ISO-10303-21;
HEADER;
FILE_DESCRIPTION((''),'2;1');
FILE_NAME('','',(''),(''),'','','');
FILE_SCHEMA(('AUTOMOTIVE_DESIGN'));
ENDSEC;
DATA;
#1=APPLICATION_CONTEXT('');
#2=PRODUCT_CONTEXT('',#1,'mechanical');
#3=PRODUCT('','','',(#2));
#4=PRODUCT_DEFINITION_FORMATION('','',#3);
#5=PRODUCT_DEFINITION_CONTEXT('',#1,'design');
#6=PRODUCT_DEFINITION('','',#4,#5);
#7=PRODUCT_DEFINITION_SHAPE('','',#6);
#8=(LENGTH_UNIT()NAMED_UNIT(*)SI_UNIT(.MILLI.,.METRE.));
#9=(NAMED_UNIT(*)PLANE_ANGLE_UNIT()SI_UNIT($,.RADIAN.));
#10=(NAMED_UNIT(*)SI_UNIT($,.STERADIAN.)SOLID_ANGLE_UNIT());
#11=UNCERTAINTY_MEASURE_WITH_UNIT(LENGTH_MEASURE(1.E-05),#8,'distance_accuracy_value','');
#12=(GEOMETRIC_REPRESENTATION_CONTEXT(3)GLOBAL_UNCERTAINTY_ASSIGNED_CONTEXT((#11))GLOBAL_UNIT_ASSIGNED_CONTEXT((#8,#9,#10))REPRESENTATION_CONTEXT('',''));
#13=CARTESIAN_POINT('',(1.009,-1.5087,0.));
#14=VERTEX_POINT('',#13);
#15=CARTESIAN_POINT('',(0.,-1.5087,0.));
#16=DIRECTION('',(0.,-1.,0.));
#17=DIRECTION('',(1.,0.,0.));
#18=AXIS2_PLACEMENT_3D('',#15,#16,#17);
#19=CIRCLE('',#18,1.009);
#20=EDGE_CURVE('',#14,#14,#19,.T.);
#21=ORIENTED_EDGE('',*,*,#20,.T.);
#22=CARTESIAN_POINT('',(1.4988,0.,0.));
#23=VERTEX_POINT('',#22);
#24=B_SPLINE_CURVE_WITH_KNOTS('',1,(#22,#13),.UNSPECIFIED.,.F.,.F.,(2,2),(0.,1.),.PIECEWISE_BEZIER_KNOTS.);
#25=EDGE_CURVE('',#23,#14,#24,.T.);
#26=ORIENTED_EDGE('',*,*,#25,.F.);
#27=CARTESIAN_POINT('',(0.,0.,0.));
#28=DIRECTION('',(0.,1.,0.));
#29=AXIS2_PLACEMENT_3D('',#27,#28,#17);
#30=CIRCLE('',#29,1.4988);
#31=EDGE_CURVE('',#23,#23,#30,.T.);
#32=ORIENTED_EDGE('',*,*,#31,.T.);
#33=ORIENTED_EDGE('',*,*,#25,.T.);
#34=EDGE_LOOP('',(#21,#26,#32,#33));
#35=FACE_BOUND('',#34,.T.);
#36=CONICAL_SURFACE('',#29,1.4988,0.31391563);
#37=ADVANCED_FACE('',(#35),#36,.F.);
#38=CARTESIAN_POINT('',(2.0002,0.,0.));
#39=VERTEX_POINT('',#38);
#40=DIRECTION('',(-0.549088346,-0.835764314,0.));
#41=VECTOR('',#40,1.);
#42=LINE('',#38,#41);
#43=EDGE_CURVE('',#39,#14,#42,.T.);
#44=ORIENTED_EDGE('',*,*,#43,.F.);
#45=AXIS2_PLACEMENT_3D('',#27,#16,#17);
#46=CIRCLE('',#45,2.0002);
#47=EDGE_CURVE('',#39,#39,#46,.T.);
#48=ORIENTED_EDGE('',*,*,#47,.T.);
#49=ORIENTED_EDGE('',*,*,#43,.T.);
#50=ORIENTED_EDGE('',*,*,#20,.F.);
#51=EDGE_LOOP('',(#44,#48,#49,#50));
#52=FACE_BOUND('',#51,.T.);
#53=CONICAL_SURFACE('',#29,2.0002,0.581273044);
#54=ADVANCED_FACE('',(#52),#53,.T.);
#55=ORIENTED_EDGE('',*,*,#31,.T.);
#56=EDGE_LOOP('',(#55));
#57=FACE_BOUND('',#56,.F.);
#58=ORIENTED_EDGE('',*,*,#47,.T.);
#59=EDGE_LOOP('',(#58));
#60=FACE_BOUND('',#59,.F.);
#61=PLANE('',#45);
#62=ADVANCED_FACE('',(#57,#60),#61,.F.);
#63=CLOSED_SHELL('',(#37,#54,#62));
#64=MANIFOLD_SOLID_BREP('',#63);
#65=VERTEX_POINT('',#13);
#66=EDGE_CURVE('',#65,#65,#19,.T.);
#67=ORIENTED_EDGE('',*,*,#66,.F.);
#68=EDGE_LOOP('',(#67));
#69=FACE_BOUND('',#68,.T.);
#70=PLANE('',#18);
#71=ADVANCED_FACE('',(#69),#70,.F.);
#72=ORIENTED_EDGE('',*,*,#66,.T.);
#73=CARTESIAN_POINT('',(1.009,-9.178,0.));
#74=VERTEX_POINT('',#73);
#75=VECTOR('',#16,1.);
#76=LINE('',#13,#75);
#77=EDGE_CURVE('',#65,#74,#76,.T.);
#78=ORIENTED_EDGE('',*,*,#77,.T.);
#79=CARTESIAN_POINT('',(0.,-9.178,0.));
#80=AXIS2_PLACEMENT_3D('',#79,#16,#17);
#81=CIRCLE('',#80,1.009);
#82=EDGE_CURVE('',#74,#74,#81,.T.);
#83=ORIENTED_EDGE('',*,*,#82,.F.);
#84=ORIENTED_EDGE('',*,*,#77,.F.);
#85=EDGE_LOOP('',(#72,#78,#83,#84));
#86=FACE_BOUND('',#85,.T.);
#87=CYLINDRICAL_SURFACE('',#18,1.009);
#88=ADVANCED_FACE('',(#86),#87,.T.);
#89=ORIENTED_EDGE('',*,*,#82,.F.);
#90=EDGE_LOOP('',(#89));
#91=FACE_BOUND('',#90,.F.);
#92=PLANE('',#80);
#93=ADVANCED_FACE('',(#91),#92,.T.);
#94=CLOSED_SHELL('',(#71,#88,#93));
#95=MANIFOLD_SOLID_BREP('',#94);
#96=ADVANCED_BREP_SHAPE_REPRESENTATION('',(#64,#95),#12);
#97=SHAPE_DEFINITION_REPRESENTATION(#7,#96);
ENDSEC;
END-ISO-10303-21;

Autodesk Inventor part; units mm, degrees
ref_plane "YZ Plane" through (0, 0, 0) normal (1, 0, 0) x (0, 1, 0)
ref_plane "XZ Plane" through (0, 0, 0) normal (0, 1, 0) x (-1, 0, 0)
ref_plane "XY Plane" through (0, 0, 0) normal (0, 0, 1) x (1, 0, 0)
sketch "Sketch1" plane through (0, 0, 0) normal (0, 0, 1) x (1, 0, 0)
  line L0 (2.0002, 0) -> (1.009, -1.5087)
  line L1 (1.009, -1.5087) -> (1.009, -9.178)
  line L2 (2.0002, 0) -> (0, 0)
  line L3 (0, 0) -> (0, -9.178)
  line L4 (0, -9.178) -> (1.009, -9.178)
revolve "Revolution1" add sketch "Sketch1" angle 360 about axis through (0, 0, 0) along (0, -1, 0)
sketch "Sketch2" plane through (0, 0, 0) normal (0, 1, 0) x (1, 0, 0)
  circle A0 centre (0, 0) radius 1.4988
loft "Loft1" cut profiles "Sketch2" section 2 edges at (-1.009, -1.5087, 0)
